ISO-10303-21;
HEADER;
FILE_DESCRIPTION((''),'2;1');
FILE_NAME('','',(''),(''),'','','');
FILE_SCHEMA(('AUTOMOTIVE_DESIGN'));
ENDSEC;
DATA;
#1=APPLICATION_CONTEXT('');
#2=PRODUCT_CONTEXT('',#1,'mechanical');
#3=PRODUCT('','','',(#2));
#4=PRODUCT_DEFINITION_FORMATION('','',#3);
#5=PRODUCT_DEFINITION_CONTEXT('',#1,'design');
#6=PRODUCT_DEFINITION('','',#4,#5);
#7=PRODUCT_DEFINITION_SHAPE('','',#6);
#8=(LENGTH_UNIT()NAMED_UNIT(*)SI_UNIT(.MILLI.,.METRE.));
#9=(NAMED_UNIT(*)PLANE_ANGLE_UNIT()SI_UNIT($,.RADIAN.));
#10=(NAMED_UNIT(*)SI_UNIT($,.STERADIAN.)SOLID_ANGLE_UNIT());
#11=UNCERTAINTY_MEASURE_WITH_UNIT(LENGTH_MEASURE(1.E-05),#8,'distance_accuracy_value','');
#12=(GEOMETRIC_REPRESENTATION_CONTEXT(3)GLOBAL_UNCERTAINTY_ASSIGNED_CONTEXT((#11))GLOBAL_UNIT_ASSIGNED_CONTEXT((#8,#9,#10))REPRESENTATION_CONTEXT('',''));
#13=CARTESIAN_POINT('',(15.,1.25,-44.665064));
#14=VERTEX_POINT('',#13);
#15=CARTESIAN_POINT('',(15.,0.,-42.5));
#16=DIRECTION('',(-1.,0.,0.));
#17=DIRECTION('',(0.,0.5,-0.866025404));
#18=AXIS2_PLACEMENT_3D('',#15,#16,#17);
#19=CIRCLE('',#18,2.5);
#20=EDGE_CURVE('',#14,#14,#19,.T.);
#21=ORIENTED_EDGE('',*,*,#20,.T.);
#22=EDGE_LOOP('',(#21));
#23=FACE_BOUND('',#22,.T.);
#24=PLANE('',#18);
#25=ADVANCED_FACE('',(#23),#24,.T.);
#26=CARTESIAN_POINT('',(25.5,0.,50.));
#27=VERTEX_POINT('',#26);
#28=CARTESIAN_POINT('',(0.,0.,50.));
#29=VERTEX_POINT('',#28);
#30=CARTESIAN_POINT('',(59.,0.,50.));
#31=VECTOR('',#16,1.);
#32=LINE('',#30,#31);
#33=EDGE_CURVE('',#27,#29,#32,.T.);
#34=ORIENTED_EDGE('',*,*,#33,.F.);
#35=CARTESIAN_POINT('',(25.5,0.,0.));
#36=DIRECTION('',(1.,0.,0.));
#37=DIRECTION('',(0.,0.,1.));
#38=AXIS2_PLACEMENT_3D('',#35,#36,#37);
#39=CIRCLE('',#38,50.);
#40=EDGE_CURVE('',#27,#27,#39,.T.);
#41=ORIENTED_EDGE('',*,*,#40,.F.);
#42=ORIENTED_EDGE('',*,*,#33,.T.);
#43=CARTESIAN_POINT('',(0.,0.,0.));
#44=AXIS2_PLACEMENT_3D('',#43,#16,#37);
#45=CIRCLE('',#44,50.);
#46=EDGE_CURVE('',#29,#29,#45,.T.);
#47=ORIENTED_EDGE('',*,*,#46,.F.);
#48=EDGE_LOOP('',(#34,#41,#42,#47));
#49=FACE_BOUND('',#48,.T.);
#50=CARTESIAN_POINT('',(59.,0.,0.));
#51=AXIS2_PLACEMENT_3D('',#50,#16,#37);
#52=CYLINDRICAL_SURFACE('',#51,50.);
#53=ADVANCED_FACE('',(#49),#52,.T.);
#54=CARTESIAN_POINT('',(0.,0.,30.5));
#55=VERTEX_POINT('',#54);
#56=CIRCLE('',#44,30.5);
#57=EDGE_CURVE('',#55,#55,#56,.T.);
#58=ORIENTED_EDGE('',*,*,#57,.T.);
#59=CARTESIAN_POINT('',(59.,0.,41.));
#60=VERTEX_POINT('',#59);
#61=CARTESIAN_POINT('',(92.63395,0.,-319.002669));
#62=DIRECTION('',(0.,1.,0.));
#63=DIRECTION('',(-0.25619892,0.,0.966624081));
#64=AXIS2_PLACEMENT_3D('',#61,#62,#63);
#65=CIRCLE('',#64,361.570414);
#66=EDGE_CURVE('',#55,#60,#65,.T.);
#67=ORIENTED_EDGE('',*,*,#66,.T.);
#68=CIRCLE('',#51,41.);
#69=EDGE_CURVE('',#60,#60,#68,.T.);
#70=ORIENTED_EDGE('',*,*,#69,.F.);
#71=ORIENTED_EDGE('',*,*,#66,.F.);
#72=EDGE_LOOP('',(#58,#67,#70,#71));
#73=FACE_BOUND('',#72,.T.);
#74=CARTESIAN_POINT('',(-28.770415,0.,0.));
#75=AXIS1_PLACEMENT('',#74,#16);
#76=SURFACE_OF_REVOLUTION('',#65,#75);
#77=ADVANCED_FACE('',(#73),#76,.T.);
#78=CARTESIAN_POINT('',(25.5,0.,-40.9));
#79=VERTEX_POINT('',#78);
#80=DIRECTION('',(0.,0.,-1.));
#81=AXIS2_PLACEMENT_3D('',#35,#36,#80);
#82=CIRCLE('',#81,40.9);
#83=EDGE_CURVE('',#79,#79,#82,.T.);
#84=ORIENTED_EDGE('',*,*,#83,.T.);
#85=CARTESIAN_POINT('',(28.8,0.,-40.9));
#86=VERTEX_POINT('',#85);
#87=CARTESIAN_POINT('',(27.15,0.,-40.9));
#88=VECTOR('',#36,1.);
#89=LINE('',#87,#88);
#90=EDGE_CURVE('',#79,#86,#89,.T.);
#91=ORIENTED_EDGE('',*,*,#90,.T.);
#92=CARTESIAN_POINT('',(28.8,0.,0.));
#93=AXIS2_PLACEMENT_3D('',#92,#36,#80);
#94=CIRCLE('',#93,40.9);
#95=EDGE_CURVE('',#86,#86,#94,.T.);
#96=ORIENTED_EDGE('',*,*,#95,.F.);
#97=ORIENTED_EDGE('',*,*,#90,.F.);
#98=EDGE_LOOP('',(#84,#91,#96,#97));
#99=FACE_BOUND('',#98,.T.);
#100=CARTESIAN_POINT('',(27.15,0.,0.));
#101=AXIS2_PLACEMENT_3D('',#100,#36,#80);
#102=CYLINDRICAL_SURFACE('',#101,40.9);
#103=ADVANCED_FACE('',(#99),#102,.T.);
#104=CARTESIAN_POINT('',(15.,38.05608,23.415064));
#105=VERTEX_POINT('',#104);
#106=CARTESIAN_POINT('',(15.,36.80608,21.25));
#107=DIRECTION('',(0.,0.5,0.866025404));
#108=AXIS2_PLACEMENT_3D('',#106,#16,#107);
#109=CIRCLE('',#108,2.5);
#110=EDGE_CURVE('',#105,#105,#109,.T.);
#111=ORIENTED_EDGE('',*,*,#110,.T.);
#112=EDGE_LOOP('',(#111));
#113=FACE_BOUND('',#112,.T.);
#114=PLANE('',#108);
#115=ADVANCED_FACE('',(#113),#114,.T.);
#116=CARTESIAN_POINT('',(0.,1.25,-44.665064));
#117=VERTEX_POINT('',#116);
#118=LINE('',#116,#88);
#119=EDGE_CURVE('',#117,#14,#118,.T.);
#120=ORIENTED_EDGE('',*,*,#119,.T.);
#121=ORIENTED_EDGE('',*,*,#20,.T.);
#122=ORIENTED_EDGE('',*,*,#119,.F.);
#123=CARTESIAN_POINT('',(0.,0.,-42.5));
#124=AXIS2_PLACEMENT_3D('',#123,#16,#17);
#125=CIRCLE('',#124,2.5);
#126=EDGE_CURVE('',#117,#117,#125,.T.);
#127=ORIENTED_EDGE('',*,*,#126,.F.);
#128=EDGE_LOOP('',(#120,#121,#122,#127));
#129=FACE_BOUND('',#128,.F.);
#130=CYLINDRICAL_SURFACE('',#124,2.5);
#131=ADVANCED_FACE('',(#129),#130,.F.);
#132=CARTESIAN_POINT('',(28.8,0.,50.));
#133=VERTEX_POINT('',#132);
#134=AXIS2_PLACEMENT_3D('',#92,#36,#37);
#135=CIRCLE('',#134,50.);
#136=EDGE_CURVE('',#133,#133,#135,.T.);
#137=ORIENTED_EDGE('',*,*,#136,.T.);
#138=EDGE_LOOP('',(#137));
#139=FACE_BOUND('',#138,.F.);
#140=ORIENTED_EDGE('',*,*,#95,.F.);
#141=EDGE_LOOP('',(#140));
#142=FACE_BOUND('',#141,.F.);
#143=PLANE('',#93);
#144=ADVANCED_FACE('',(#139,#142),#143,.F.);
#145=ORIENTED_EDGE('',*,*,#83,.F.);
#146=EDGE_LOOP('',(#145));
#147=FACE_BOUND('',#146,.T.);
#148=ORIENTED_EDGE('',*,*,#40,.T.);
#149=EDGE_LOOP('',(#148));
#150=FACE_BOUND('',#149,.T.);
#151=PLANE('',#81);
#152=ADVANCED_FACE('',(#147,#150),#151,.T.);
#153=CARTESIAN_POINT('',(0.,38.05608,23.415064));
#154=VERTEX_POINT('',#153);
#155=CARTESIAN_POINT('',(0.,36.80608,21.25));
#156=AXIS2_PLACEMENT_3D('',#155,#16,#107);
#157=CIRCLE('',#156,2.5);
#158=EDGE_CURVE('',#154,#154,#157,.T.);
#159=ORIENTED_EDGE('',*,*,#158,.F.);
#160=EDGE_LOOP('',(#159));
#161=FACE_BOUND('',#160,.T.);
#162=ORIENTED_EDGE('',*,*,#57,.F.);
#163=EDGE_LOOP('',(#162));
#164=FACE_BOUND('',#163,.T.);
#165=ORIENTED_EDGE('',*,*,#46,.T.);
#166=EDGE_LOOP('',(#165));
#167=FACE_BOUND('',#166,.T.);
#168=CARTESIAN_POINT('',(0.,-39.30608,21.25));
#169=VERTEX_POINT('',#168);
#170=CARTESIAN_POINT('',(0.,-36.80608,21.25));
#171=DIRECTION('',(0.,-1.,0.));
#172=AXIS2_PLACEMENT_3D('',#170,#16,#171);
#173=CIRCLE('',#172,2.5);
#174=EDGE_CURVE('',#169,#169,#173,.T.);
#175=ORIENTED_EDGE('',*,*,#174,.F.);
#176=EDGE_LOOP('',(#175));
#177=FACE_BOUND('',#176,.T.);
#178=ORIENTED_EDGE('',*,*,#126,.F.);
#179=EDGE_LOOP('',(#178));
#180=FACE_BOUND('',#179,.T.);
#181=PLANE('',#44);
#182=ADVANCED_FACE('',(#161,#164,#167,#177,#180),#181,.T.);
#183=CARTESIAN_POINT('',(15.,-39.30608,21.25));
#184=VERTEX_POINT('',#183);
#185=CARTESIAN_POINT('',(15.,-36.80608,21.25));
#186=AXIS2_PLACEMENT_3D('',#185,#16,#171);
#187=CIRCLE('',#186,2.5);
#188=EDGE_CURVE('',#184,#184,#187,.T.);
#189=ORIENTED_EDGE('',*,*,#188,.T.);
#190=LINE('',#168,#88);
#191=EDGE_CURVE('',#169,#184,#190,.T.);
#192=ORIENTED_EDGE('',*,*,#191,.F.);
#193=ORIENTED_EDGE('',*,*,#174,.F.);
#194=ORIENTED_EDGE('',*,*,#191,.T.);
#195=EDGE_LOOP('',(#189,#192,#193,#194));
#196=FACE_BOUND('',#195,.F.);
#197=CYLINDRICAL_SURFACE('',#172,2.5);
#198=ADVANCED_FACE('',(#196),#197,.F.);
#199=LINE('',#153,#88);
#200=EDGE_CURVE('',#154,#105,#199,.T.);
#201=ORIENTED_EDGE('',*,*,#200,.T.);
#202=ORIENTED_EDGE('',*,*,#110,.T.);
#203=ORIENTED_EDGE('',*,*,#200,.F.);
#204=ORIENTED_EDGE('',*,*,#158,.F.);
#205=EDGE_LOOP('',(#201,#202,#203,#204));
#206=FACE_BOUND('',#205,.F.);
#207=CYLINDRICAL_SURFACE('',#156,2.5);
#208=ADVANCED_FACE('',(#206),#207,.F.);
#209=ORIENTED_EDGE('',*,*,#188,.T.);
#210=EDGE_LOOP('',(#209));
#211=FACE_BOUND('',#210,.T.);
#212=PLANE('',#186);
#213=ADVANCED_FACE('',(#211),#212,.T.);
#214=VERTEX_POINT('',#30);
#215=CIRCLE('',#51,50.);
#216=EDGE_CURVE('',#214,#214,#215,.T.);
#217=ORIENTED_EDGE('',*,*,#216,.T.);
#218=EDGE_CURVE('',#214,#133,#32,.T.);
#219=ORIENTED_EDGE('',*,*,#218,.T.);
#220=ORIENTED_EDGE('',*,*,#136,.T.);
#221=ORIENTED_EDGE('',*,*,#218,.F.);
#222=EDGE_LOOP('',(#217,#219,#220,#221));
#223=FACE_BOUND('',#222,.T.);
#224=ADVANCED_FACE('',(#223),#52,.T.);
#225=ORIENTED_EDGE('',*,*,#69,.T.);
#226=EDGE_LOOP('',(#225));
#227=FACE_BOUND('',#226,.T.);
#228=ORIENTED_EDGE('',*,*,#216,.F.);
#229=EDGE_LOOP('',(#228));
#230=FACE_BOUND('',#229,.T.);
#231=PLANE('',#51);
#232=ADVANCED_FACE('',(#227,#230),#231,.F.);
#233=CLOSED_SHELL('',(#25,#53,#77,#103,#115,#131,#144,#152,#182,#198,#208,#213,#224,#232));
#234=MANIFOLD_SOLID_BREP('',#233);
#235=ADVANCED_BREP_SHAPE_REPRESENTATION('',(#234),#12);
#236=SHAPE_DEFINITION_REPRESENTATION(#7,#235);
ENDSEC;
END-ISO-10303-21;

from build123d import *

# Parameters (mm, degrees)
F2_R            = 2.5
F3_DEPTH        = 15
F3_COPIES_COUNT = 3
F4_W            = 3.3
F4_H            = 9.1


# Not quite as in the source:
# - a pattern or mirror of a feature is missing from the dataset's text; its kind, count and spacing are read off the source's solid


with BuildPart() as f1:
    # F0 (on Front) → F1 (revolve)
    with BuildSketch(Plane.XZ):
        with BuildLine():
            Line((59, 50), (0, 50))
            Line((0, 50), (0, 30.5))
            ThreePointArc((0, 30.5), (29.2820901792, 36.97444566), (59, 41))
            Line((59, 41), (59, 50))
        make_face()
    revolve(axis=Axis((-28.7704151153, 0, 0), (-1, 0, 0)))

    # F2 (on face) → F3 (cut)
    with BuildSketch(Plane(origin=(0, 0, 0), x_dir=(0, -1, 0), z_dir=(-1, 0, 0))):
        with Locations((36.8060796608, 21.25)):
            Circle(F2_R)
    f3 = extrude(amount=-F3_DEPTH, mode=Mode.SUBTRACT)

    # F3_copies: F3 ×3 about axis
    f3_copies_axis = Axis((0, 0, 0), (1, 0, 0))
    for i in range(1, F3_COPIES_COUNT):
        add(f3.rotate(f3_copies_axis, i * 360 / F3_COPIES_COUNT), mode=Mode.SUBTRACT)

    # F4 (on Front) → F5 (revolve, cut)
    with BuildSketch(Plane.XZ):
        with Locations((27.15, -45.45)):
            Rectangle(F4_W, F4_H)
    revolve(axis=Axis((25.2881273627, 0, 0), (1, 0, 0)), mode=Mode.SUBTRACT)


solid = f1.part
